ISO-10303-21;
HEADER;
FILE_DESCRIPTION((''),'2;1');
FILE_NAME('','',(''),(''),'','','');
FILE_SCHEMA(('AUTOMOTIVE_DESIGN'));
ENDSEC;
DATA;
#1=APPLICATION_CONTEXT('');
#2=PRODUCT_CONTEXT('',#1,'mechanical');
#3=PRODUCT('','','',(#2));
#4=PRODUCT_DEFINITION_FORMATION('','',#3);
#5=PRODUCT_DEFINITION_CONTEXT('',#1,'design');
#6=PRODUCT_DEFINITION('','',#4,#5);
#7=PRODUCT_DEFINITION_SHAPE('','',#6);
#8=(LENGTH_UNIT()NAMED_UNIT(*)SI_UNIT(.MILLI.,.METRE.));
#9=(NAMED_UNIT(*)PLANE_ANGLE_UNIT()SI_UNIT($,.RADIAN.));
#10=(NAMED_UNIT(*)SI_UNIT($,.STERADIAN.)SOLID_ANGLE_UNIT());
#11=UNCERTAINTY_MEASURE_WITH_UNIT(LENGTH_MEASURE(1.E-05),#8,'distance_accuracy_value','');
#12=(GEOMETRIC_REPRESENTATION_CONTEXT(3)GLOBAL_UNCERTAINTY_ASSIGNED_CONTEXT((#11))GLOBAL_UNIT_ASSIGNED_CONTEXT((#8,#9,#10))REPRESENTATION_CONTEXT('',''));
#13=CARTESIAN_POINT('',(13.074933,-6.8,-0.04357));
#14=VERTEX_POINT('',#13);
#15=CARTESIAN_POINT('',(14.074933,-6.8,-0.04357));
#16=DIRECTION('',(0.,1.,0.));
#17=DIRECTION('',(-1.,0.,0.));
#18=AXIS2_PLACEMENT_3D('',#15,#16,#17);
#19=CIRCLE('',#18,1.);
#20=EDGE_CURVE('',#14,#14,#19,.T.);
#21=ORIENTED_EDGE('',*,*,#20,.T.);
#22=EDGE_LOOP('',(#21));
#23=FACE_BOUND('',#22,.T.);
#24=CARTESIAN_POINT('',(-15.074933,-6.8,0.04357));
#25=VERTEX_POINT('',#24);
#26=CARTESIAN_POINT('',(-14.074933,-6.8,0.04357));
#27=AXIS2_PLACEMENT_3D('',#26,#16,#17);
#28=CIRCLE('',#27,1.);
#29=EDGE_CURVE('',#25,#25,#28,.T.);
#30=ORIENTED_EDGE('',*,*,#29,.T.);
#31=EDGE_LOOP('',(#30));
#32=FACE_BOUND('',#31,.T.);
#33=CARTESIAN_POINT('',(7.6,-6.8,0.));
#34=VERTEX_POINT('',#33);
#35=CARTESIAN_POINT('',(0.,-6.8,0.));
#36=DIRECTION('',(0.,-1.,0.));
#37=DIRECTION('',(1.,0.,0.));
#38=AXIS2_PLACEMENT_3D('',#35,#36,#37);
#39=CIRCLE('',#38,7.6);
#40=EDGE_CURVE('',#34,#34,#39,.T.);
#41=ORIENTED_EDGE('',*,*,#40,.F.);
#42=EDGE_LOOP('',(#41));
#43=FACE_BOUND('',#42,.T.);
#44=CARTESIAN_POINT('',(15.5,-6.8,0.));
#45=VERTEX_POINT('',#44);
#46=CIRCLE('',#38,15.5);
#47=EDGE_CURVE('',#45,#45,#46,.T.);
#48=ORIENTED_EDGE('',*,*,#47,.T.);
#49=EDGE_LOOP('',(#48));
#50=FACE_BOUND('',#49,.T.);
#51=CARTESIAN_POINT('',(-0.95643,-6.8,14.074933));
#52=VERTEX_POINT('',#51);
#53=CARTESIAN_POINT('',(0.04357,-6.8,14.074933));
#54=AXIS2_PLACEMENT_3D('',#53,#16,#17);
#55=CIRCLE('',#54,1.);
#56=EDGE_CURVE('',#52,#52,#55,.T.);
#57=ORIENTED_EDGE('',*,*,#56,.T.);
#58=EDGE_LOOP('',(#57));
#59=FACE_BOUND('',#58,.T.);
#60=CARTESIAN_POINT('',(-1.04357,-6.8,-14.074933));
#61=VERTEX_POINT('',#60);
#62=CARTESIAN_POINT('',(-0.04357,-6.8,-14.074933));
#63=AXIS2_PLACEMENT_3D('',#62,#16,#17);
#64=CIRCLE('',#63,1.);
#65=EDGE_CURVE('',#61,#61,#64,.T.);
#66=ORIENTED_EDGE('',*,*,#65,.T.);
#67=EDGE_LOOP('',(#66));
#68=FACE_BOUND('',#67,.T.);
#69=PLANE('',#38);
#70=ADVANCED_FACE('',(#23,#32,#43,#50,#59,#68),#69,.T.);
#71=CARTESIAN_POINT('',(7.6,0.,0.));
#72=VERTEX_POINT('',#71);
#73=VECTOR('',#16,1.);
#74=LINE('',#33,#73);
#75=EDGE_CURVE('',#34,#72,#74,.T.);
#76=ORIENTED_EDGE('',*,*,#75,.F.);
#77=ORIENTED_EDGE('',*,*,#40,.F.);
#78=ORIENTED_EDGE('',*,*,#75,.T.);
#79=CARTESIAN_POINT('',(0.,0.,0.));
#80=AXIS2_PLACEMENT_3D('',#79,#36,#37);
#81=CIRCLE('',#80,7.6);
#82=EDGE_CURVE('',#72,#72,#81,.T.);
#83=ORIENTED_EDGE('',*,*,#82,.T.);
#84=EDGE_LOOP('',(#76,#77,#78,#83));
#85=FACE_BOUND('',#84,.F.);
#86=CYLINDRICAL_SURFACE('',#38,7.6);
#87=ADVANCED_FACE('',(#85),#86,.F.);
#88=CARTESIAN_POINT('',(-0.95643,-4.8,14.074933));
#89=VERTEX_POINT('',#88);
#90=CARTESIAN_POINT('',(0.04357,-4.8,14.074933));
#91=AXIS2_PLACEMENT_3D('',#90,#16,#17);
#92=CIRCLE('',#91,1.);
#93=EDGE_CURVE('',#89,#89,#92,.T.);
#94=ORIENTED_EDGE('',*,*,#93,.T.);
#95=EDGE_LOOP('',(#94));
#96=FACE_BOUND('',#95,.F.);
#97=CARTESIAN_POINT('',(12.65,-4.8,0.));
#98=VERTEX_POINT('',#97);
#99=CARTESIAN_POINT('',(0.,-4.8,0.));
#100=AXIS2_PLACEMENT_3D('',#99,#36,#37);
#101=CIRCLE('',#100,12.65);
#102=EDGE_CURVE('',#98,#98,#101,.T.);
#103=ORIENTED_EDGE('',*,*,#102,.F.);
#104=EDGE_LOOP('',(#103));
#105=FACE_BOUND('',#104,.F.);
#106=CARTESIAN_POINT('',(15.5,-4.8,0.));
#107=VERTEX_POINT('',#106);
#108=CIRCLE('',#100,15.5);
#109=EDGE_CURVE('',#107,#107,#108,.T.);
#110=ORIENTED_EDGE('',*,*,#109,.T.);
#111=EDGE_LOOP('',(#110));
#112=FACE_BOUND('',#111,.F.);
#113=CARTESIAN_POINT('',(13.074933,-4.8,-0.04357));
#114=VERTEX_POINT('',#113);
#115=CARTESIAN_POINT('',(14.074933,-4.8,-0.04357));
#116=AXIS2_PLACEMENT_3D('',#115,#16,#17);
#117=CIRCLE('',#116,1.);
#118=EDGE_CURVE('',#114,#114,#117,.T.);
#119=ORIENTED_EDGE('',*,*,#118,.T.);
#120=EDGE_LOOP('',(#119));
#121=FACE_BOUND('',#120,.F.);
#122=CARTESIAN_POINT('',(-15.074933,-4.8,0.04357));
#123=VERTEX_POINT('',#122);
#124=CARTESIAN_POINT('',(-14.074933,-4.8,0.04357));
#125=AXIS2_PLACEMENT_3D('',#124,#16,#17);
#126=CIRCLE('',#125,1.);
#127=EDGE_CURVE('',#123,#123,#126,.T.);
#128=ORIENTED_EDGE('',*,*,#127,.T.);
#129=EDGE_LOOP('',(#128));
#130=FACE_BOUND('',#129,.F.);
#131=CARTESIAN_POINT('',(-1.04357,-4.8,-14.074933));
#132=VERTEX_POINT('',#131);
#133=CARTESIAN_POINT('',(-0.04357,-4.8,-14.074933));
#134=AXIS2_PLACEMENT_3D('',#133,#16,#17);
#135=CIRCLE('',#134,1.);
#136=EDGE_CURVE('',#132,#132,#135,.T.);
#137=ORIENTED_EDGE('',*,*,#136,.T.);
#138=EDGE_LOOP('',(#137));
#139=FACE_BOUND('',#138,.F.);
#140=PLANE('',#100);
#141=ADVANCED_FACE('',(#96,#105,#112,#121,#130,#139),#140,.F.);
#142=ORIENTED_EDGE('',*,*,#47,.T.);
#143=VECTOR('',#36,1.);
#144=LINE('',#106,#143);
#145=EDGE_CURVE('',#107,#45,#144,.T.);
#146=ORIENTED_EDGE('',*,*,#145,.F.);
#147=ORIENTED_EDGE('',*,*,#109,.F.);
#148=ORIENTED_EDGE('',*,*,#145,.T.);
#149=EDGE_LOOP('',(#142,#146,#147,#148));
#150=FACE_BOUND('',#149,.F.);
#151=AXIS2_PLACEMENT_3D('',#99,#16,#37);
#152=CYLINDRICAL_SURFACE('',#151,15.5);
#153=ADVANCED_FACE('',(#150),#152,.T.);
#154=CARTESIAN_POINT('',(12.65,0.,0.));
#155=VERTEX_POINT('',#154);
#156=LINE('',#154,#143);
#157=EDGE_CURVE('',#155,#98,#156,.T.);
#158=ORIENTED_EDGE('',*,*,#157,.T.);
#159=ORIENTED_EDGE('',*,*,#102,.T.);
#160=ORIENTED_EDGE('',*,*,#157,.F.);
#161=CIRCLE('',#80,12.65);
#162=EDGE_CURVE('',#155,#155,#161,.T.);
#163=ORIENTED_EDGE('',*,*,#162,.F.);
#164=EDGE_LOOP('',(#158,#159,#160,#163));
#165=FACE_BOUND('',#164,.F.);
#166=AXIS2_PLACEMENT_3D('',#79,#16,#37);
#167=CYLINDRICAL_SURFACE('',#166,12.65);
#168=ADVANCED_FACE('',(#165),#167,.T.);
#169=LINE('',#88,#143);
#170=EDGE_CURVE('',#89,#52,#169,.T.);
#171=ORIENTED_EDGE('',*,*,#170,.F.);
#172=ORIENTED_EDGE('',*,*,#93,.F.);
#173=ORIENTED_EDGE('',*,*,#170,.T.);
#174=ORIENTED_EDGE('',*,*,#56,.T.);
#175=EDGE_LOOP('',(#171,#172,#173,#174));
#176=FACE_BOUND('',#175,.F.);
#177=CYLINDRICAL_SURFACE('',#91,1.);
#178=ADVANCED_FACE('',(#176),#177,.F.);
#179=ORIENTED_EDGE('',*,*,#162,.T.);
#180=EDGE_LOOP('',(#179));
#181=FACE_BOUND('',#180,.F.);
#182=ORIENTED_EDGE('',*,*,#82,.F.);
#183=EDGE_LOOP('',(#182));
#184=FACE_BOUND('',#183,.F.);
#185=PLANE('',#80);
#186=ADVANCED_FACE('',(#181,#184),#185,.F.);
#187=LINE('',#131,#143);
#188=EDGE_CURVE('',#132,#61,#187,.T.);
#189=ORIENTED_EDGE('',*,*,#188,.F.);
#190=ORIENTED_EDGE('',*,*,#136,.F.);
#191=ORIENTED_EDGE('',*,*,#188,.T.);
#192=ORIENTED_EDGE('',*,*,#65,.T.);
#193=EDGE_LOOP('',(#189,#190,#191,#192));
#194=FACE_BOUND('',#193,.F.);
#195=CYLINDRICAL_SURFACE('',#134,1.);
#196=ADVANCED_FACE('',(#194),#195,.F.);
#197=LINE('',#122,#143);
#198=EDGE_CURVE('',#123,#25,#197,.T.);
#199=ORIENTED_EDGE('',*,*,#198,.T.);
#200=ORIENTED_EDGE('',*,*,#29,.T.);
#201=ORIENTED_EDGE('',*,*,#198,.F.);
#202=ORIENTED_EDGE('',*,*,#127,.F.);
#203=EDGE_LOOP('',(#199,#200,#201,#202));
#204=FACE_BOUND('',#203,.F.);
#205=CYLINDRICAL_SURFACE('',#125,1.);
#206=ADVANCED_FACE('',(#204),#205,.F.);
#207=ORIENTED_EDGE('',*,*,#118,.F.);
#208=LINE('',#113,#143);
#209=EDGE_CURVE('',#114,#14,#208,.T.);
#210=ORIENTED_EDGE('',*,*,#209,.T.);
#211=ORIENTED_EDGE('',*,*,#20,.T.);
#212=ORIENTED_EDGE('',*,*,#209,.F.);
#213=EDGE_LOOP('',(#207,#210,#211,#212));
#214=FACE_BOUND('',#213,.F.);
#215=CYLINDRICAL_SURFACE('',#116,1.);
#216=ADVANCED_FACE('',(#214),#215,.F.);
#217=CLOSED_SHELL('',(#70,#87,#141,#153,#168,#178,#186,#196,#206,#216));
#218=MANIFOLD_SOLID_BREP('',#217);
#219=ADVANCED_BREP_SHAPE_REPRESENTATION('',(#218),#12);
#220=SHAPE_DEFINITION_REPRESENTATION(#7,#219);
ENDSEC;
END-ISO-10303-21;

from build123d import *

# Parameters (mm, degrees)
F0_R     = 12.65
F1_DEPTH = 4.8
F2_R     = 15.5
F2_R_2   = 12.65
F3_DEPTH = 2
F4_R     = 1
F5_DEPTH = 2
F6_R     = 7.6
F7_DEPTH = 7


# Not quite as in the source:
# - a feature names something its author has since deleted; it is built from what else it names


with BuildPart() as f1:
    # F0 (on Front) → F1 (new body)
    with BuildSketch(Plane.XZ):
        Circle(F0_R)
    extrude(amount=F1_DEPTH)

    # F2 (on face) → F3 (join)
    with BuildSketch(Plane.XZ.offset(4.8)):
        Circle(F2_R)
        Circle(F2_R_2, mode=Mode.SUBTRACT)
        Circle(F2_R_2)
    extrude(amount=F3_DEPTH)

    # F4 (on face) → F5 (cut)
    with BuildSketch(Plane(origin=(0, -4.8, 0), x_dir=(-1, 0, 0), z_dir=(0, 1, 0))):
        with Locations((-0.0435703545, 14.074932562)):
            Circle(F4_R)
        with Locations((-14.074932562, -0.0435703545)):
            Circle(F4_R)
        with Locations((0.0435703545, -14.074932562)):
            Circle(F4_R)
        with Locations((14.074932562, 0.0435703545)):
            Circle(F4_R)
    extrude(amount=-F5_DEPTH, mode=Mode.SUBTRACT)

    # F6 (on face) → F7 (cut)
    with BuildSketch(Plane.XZ.offset(6.8)):
        Circle(F6_R)
    extrude(amount=-F7_DEPTH, mode=Mode.SUBTRACT)


solid = f1.part
